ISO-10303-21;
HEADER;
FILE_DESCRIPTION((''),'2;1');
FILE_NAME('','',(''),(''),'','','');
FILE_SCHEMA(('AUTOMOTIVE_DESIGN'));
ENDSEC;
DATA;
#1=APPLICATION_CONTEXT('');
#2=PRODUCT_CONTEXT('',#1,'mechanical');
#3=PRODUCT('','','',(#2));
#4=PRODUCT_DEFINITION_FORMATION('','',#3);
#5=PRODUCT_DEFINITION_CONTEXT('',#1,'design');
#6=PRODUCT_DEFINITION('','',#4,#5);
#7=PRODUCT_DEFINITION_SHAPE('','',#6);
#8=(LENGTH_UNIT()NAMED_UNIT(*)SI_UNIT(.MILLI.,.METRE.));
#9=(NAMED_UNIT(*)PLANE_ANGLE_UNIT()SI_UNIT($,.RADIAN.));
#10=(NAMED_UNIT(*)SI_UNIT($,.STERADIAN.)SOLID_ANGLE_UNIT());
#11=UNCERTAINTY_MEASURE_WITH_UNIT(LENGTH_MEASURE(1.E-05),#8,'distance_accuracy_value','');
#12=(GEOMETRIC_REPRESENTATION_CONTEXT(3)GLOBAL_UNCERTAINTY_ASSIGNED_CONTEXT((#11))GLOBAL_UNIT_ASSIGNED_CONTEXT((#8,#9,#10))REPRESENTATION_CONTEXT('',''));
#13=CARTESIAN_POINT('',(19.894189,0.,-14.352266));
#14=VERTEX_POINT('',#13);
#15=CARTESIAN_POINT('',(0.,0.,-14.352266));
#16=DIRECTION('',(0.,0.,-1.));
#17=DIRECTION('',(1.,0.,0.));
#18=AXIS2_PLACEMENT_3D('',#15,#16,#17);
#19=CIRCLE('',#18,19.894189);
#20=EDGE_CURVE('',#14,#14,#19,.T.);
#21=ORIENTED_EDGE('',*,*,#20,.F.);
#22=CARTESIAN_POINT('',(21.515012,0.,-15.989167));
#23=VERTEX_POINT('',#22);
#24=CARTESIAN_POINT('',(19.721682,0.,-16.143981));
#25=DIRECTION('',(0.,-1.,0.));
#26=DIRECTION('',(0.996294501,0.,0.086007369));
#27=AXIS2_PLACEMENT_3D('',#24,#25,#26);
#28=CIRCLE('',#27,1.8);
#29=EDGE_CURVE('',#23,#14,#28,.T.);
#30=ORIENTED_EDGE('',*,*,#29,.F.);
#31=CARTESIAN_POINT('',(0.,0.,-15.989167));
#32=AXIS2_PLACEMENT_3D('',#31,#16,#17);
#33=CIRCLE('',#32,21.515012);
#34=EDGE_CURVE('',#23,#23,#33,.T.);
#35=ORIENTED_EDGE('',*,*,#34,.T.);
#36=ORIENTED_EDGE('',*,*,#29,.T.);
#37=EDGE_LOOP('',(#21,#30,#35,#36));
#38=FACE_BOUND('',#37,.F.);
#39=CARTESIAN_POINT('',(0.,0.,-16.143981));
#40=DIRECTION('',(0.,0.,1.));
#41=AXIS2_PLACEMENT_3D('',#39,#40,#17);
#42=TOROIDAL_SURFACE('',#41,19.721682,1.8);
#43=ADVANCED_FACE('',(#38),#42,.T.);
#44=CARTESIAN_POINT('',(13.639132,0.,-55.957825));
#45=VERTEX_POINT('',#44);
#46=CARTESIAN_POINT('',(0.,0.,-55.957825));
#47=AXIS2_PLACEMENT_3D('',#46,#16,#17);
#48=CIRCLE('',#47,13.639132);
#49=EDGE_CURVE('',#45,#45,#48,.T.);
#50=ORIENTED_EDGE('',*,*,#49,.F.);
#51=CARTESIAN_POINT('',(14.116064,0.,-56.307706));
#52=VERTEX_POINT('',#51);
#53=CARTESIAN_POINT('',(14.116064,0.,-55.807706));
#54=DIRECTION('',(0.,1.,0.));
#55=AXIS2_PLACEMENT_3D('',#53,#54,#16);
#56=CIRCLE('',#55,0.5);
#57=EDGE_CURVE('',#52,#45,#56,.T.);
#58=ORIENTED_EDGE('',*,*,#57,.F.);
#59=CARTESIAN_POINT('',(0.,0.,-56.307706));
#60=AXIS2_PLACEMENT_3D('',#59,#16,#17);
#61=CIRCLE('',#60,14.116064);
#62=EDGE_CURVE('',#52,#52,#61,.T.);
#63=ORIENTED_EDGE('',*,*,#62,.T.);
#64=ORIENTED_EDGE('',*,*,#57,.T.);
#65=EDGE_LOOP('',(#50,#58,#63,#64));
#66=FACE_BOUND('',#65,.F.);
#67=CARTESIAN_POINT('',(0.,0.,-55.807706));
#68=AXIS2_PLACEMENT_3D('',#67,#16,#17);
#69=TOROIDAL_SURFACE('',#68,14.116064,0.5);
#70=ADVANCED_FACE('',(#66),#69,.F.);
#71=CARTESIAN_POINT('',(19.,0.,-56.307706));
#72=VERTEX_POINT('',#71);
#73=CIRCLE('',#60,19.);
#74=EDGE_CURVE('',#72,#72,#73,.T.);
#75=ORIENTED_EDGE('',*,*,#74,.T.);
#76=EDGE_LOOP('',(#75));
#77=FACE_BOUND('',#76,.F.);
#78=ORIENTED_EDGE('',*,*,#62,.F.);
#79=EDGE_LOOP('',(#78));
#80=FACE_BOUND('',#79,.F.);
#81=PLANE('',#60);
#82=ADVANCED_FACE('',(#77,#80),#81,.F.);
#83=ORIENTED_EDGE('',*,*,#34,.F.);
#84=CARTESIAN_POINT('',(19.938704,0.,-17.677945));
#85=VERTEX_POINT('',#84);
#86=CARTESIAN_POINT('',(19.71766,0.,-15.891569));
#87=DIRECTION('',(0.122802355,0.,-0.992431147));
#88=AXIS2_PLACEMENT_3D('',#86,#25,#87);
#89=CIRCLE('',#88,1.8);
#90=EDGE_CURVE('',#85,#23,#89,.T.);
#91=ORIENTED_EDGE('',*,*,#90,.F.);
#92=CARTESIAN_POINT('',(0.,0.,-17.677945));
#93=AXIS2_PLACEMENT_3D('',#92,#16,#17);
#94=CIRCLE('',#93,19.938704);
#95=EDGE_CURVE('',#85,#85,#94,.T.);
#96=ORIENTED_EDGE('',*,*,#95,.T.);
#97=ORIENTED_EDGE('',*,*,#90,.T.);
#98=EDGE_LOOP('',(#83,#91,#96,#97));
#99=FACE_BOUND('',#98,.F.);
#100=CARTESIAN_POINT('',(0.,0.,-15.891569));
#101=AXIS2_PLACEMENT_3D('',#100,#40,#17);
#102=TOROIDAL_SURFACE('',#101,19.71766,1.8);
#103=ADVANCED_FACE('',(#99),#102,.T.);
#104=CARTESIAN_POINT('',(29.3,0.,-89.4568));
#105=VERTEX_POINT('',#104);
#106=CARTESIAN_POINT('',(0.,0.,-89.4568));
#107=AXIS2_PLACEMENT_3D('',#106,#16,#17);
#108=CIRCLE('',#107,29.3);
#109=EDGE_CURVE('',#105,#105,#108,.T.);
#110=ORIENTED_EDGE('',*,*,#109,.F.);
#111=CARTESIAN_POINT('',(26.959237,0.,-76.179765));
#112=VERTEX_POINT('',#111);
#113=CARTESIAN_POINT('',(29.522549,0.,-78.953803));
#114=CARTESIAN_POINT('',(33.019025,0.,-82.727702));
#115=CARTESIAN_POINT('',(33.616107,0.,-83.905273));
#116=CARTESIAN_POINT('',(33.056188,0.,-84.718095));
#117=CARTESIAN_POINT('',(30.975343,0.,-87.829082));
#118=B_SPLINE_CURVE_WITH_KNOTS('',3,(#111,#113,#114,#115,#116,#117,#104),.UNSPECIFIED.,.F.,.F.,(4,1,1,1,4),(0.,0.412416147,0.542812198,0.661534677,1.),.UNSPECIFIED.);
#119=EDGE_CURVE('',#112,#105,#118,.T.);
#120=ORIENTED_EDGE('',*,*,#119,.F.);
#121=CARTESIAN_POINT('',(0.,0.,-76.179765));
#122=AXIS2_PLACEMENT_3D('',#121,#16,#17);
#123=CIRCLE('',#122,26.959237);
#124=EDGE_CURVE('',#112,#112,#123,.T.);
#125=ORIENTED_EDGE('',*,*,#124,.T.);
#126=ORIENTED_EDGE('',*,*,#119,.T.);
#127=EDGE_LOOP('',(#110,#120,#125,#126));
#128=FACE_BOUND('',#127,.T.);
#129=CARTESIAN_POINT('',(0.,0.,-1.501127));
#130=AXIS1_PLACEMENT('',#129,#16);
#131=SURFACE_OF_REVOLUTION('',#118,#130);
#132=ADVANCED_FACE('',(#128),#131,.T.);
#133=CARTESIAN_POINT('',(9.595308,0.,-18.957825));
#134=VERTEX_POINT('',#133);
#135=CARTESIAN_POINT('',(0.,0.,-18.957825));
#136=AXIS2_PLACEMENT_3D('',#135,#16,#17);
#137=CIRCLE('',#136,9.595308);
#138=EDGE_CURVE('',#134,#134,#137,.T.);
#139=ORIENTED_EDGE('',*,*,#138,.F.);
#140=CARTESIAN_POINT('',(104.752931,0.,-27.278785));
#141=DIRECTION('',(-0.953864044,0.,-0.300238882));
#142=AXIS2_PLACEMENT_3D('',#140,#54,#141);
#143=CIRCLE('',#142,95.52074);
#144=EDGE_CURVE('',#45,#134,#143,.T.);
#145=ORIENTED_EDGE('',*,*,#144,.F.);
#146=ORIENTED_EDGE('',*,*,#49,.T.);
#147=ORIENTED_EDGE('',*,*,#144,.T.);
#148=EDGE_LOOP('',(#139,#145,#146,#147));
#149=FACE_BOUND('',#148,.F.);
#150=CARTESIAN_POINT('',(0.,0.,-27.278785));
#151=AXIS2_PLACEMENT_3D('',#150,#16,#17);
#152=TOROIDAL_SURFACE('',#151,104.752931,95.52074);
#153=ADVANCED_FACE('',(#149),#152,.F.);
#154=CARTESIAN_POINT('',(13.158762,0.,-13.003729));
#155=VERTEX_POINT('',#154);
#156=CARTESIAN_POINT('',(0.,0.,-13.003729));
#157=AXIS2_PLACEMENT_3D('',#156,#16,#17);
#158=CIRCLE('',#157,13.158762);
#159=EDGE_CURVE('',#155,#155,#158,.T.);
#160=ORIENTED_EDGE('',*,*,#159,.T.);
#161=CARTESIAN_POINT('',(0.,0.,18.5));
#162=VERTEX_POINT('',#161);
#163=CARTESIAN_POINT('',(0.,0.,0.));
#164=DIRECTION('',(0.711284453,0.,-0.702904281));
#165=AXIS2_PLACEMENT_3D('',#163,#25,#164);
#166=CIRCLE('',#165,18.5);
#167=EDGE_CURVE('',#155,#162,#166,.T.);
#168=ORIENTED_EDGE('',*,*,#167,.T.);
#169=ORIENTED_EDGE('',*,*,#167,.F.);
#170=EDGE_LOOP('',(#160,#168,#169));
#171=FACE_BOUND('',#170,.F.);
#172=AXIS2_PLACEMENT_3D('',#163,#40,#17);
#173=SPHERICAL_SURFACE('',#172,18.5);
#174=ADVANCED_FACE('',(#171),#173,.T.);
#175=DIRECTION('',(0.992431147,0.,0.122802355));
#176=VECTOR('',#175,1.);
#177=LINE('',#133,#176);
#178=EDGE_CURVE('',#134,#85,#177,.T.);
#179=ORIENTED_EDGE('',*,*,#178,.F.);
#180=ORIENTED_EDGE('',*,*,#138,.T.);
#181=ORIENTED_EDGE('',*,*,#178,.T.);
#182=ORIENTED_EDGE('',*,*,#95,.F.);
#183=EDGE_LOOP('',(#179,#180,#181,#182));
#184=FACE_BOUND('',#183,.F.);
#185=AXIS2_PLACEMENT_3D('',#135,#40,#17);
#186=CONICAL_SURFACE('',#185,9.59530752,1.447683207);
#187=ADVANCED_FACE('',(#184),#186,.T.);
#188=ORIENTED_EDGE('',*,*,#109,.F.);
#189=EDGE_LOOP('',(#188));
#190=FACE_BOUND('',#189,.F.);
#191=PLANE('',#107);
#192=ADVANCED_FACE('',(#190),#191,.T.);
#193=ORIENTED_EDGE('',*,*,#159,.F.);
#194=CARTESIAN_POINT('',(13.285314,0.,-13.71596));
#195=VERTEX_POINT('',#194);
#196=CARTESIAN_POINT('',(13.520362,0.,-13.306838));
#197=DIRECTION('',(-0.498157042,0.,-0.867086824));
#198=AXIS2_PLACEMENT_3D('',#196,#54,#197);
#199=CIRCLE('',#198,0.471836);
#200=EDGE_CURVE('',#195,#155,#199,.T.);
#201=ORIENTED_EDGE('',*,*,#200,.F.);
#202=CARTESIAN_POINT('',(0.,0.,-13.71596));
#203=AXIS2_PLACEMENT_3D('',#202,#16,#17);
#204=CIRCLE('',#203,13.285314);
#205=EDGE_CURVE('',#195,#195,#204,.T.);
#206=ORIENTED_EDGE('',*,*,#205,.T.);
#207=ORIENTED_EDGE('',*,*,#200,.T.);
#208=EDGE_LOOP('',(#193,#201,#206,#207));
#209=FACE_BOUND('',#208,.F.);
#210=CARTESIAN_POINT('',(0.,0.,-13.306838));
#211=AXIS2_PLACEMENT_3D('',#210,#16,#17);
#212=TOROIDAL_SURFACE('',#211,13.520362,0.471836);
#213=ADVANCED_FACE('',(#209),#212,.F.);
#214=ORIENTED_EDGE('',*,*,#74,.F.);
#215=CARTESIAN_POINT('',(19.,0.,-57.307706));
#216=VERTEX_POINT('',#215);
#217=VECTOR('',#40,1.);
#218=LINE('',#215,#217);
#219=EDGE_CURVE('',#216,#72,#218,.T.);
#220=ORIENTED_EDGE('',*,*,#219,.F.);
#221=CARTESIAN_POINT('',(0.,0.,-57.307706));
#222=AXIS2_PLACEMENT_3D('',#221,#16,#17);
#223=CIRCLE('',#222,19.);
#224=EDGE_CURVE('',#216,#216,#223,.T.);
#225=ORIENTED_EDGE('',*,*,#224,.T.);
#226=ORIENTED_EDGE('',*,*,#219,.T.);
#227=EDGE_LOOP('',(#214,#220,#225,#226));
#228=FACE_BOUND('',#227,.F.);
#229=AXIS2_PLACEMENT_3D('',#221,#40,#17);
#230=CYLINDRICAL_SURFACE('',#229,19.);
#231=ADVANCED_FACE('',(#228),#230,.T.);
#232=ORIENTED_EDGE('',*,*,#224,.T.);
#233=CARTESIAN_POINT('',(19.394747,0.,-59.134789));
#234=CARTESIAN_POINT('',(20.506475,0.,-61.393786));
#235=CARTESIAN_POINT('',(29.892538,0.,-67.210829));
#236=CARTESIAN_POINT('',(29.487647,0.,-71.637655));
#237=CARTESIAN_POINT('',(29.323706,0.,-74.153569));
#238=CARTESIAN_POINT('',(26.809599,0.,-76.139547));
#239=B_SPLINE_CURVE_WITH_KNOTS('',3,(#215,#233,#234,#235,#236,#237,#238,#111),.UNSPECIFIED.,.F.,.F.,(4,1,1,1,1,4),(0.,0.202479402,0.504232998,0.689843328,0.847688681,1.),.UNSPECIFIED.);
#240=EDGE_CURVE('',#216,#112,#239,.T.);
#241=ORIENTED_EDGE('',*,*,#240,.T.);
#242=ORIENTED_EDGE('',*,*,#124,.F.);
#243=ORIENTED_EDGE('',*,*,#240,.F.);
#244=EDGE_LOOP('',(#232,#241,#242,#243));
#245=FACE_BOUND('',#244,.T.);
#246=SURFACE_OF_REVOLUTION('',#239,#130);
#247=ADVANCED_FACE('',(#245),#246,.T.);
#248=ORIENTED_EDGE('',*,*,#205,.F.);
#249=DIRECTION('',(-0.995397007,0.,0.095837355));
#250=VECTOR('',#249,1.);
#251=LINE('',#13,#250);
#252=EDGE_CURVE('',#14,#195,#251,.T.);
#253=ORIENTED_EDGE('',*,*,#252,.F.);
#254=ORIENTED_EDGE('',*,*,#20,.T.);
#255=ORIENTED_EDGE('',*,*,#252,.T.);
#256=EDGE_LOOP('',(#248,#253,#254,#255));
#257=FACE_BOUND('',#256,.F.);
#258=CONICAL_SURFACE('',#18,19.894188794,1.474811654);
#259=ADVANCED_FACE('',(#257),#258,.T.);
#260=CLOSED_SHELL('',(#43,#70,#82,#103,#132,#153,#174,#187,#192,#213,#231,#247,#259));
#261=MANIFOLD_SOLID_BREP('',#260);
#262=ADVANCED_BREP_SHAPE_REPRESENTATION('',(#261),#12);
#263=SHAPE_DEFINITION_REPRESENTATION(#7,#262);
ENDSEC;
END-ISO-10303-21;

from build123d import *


with BuildPart() as f1:
    # F0 (on Front) → F1 (revolve)
    with BuildSketch(Plane.XZ):
        with BuildLine():
            Line((19, -57.3077059366), (0, -57.3077059366))
            Line((0, -57.3077059366), (0, -89.4568003867))
            Line((0, -89.4568003867), (29.3, -89.4568003867))
            add(Edge.make_bspline(
                [(26.9592367113, -76.1797651649), (29.5225490997, -78.9538033711), (33.0190249664, -82.727702405), (33.6161066802, -83.9052734845), (33.0561881237, -84.7180951511), (30.9753428321, -87.8290817836), (29.3, -89.4568003867)],
                knots=[0, 0, 0, 0, 0.4124161473, 0.5428121985, 0.6615346774, 1, 1, 1, 1], degree=3))
            add(Edge.make_bspline(
                [(19, -57.3077059366), (19.3947468179, -59.1347886267), (20.5064753127, -61.3937856627), (29.8925378169, -67.2108287114), (29.4876468568, -71.6376547275), (29.3237060979, -74.1535690433), (26.8095991963, -76.1395467772), (26.9592367113, -76.1797651649)],
                knots=[0, 0, 0, 0, 0.202479402, 0.5042329978, 0.6898433279, 0.8476886808, 1, 1, 1, 1], degree=3))
        make_face()
        with BuildLine():
            ThreePointArc((13.2853137329, -13.7159600853), (13.0558026627, -13.3893818497), (13.1587623714, -13.0037291903))
            ThreePointArc((13.1587623714, -13.0037291903), (17.070720401, 7.1302527999), (0, 18.5))
            Line((0, 18.5), (0, -57.3077059366))
            Line((0, -57.3077059366), (19, -57.3077059366))
            Line((19, -57.3077059366), (19, -56.3077059366))
            Line((19, -56.3077059366), (16.9227282165, -56.3077059366))
            Line((16.9227282165, -56.3077059366), (14.1160641541, -56.3077059366))
            ThreePointArc((14.1160641541, -56.3077059366), (13.8203106422, -56.2108558594), (13.6391321322, -55.9578253776))
            ThreePointArc((13.6391321322, -55.9578253776), (9.7976220598, -37.6566938703), (9.5953075204, -18.9578253776))
            Line((9.5953075204, -18.9578253776), (19.9387038202, -17.6779447283))
            ThreePointArc((19.9387038202, -17.6779447283), (21.0335140908, -17.1197896987), (21.5150116553, -15.9891674537))
            ThreePointArc((21.5150116553, -15.9891674537), (21.0007400429, -14.8774857988), (19.8941887936, -14.352266106))
            Line((19.8941887936, -14.352266106), (13.2853137329, -13.7159600853))
        make_face()
    revolve(axis=Axis((0, 0, -1.5011268521), (0, 0, -1)))


solid = f1.part
